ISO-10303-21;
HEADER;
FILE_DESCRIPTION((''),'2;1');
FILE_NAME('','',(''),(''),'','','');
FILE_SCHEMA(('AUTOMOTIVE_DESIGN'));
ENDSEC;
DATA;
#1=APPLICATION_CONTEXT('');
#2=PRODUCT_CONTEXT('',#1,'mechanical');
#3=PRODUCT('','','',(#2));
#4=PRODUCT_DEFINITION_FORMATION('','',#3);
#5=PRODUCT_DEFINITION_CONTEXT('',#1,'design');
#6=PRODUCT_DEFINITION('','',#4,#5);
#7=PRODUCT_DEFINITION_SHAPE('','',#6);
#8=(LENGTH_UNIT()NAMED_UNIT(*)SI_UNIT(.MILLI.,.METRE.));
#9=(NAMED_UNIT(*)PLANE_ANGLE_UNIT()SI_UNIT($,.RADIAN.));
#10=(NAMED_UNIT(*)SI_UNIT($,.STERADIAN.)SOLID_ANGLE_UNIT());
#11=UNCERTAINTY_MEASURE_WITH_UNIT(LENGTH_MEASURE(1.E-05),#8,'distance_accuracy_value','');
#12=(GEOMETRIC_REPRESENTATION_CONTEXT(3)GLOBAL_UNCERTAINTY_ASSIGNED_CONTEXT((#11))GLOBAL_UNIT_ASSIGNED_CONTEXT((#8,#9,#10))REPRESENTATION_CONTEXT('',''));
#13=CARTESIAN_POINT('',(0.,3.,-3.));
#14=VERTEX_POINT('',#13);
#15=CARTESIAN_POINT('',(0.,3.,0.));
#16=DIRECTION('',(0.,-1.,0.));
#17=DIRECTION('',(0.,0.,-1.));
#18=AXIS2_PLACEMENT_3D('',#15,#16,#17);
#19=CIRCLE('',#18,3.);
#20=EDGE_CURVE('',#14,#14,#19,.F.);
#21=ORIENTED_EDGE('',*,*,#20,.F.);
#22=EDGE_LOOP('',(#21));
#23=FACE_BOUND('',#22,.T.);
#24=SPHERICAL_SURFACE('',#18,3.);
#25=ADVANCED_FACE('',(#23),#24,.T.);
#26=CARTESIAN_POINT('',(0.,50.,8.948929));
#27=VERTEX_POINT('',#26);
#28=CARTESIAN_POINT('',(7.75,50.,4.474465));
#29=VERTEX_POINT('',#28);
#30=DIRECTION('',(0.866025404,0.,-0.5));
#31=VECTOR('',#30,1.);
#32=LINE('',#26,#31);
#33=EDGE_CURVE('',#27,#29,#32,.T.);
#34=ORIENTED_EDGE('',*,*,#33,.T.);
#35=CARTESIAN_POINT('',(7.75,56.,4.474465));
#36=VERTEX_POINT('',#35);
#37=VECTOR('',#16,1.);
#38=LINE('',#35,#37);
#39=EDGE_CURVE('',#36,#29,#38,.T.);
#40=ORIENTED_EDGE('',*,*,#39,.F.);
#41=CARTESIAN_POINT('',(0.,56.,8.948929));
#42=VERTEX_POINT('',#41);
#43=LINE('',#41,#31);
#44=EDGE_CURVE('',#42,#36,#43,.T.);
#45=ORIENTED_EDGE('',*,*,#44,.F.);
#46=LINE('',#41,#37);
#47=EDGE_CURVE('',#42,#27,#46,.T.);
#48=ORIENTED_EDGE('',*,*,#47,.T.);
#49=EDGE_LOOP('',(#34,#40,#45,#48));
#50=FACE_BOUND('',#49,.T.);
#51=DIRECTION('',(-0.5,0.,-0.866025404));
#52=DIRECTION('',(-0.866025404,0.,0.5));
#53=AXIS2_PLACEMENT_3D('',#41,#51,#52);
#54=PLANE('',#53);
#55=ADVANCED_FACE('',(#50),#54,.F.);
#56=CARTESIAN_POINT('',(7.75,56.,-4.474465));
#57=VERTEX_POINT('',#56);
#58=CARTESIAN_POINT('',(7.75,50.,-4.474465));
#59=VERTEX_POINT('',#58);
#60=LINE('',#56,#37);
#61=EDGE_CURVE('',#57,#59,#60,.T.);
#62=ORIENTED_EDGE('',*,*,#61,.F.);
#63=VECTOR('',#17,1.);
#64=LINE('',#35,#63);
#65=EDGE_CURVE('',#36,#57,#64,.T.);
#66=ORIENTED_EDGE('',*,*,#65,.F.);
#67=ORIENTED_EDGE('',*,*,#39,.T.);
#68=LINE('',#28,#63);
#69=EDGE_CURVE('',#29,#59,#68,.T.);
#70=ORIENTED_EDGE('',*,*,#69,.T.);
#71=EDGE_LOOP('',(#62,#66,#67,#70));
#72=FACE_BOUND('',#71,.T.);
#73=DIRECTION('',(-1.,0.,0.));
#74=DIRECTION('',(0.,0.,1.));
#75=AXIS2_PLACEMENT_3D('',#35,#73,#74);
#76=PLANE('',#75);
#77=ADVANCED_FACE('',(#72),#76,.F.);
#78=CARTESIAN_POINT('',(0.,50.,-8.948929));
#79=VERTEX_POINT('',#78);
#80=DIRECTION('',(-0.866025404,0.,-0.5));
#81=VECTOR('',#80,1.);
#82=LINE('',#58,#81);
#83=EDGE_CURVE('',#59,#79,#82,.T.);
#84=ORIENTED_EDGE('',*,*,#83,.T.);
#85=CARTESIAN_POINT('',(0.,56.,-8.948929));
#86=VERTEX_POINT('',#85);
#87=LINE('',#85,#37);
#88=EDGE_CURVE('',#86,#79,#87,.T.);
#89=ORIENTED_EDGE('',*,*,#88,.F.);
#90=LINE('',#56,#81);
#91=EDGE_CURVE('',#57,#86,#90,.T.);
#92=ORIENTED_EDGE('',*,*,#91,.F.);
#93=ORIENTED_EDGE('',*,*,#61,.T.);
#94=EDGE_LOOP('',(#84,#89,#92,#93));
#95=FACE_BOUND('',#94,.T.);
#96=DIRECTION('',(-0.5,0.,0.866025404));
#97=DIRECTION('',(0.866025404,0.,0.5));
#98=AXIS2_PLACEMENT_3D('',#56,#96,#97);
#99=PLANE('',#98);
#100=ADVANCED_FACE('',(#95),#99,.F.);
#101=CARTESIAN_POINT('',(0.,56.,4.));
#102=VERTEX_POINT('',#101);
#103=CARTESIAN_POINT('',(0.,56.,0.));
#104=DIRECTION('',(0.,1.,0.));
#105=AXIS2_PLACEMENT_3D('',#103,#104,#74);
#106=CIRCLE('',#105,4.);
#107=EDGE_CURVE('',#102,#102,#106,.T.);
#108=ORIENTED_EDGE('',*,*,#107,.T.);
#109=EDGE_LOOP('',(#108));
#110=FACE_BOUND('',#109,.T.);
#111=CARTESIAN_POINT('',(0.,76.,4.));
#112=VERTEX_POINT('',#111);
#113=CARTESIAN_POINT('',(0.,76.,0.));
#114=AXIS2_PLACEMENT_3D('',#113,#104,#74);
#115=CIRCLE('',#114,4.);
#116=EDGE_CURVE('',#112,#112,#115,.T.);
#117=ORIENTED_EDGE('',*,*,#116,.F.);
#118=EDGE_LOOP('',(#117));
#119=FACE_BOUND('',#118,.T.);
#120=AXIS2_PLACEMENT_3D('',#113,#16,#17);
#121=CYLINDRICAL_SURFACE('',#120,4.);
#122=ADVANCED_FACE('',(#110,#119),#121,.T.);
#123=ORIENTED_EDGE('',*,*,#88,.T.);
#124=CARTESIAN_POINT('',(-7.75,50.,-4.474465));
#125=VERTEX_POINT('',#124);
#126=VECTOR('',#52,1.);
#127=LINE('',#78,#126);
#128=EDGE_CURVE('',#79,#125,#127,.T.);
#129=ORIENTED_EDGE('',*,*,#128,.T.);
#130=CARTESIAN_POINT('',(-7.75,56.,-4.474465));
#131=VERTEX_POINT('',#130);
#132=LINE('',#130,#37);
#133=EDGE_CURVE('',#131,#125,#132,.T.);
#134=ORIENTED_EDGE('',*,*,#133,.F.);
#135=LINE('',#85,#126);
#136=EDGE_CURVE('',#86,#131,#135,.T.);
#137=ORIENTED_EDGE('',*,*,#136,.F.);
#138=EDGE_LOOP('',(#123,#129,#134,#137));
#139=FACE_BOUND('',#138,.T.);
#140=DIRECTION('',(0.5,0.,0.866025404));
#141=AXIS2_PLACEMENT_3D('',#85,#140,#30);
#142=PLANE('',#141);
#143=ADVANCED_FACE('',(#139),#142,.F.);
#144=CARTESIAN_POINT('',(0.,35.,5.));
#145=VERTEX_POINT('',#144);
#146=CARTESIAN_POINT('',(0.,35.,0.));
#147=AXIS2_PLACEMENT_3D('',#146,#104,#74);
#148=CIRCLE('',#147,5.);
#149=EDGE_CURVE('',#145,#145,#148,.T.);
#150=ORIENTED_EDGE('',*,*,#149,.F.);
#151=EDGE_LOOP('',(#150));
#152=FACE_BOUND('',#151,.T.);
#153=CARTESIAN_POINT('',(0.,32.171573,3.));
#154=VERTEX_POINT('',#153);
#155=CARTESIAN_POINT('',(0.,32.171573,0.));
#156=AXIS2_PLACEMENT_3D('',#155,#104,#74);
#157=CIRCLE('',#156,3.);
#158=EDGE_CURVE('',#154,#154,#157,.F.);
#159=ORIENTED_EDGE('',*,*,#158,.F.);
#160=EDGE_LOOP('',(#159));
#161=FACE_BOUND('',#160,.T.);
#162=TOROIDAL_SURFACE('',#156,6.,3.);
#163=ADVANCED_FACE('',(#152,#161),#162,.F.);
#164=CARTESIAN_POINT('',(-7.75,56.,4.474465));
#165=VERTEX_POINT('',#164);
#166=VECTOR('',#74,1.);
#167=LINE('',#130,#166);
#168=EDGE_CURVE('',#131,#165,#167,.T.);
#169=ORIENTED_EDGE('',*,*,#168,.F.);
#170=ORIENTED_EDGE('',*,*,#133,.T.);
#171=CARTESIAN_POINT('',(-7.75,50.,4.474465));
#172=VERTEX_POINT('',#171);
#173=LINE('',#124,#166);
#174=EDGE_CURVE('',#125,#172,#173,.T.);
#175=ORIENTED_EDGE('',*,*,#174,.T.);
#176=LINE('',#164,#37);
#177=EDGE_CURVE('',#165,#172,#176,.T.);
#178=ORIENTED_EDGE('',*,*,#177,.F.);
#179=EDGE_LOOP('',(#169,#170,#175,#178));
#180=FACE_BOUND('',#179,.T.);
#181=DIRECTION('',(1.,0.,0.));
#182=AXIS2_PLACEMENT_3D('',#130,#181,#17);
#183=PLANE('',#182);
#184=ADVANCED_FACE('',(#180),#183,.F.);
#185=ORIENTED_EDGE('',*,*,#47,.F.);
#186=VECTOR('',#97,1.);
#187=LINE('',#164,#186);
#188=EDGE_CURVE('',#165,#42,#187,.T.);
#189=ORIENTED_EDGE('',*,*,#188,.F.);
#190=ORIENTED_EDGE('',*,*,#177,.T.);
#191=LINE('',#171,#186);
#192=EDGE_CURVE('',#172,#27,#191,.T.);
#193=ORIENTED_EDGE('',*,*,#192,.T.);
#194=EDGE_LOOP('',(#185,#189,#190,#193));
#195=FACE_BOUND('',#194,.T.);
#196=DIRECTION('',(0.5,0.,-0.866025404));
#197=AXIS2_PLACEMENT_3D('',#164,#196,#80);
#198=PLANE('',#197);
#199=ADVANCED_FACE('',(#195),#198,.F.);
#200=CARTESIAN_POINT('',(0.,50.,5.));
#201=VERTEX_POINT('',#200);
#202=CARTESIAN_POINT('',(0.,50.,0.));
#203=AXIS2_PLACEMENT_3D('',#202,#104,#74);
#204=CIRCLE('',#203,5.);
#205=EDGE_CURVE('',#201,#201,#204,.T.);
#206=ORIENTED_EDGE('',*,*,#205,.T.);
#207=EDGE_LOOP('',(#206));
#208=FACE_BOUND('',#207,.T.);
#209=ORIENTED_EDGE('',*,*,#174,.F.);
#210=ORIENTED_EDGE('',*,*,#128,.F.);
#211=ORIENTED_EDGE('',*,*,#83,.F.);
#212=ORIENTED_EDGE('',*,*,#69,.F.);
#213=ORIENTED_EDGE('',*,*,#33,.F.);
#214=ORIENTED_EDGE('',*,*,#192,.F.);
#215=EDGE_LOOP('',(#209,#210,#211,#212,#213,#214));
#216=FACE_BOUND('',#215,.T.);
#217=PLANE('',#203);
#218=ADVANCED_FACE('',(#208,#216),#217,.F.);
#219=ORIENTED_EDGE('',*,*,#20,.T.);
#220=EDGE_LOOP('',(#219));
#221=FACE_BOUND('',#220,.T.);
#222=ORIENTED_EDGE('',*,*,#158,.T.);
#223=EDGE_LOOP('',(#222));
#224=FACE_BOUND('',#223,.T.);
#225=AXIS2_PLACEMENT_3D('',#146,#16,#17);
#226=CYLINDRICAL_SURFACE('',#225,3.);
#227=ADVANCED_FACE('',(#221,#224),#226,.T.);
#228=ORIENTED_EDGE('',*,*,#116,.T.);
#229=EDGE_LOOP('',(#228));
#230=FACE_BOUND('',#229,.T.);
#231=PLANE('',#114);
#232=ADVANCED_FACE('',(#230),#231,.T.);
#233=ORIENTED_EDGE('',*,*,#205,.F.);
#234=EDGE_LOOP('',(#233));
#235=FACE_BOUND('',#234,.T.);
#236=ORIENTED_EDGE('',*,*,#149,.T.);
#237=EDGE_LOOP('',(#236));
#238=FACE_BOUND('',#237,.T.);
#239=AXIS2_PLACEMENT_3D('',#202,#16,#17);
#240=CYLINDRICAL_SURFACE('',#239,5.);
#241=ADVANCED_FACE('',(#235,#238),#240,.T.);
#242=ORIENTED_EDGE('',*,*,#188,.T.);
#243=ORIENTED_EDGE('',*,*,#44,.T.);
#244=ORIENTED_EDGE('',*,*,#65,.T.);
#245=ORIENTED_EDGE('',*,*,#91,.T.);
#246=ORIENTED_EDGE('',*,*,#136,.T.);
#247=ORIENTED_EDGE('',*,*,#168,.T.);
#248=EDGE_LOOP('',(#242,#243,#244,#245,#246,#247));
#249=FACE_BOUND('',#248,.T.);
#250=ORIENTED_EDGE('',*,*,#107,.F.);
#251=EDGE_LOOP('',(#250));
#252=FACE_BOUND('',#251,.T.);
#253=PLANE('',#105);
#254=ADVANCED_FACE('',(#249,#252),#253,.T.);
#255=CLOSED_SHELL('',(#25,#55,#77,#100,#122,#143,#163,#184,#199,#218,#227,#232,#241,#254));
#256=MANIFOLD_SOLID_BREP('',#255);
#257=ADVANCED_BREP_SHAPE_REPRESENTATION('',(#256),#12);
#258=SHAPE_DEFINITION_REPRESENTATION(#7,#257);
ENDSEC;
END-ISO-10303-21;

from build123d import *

# Parameters (mm, degrees)
SKETCH1_R           = 3
BOSS_EXTRUDE1_DEPTH = 35
FILLET1_R           = 3
SKETCH2_R           = 5
BOSS_EXTRUDE2_DEPTH = 15
BOSS_EXTRUDE3_DEPTH = 6
SKETCH4_R           = 4
BOSS_EXTRUDE4_DEPTH = 20
FILLET2_R           = 3


with BuildPart() as part:
    # Sketch1 → Boss-Extrude1 (new body)
    with BuildSketch(Plane(origin=(0, 0, 0), x_dir=(1, 0, 0), z_dir=(0, 1, 0))):
        with Locations(Location((0, 0, 0), (0, 0, 270))):
            Circle(SKETCH1_R)
    extrude(amount=BOSS_EXTRUDE1_DEPTH)

    # Fillet1
    fillet1_edges = [part.edges().sort_by_distance(p)[0] for p in [
        (0, 0, -3),
    ]]
    fillet(fillet1_edges, radius=FILLET1_R)

    # Sketch2 → Boss-Extrude2 (add)
    with BuildSketch(Plane(origin=(0, 35, 0), x_dir=(1, 0, 0), z_dir=(0, 1, 0))):
        with Locations(Location((0, 0, 0), (0, 0, 270))):
            Circle(SKETCH2_R)
    extrude(amount=BOSS_EXTRUDE2_DEPTH)

    # Sketch3 → Boss-Extrude3 (add)
    with BuildSketch(Plane(origin=(0, 50, 0), x_dir=(1, 0, 0), z_dir=(0, 1, 0))):
        Polygon((7.75, -4.474464586), (7.75, 4.474464586), (0, 8.948929172), (-7.75, 4.474464586), (-7.75, -4.474464586), (0, -8.948929172), align=None)
    extrude(amount=BOSS_EXTRUDE3_DEPTH)

    # Sketch4 → Boss-Extrude4 (add)
    with BuildSketch(Plane(origin=(0, 56, 0), x_dir=(1, 0, 0), z_dir=(0, 1, 0))):
        with Locations(Location((0, 0, 0), (0, 0, 270))):
            Circle(SKETCH4_R)
    extrude(amount=BOSS_EXTRUDE4_DEPTH)

    # Fillet2
    # the kernel refuses this fillet: 3 mm, written as the material it adds along each edge
    with BuildSketch(Plane(origin=(0, 35, 0), x_dir=(0, 0, 1), z_dir=(-1, 0, 0))) as fillet2_piece_1:
        with BuildLine():
            CenterArc((6, -2.828427125), FILLET2_R, 109.471220634, 70.528779366)
            Line((3, -2.828427125), (2.94, -2.828427125))
            Line((2.94, -2.828427125), (2.94, 0))
            Line((2.94, 0), (3, 0.06))
            ThreePointArc((3, 0.06), (4, 0.06), (4.98, 0.056568542))
            Line((4.98, 0.056568542), (5, 0))
        make_face()
    revolve(axis=Axis((0, 35, 0), (0, 1, 0)))


solid = part.part
